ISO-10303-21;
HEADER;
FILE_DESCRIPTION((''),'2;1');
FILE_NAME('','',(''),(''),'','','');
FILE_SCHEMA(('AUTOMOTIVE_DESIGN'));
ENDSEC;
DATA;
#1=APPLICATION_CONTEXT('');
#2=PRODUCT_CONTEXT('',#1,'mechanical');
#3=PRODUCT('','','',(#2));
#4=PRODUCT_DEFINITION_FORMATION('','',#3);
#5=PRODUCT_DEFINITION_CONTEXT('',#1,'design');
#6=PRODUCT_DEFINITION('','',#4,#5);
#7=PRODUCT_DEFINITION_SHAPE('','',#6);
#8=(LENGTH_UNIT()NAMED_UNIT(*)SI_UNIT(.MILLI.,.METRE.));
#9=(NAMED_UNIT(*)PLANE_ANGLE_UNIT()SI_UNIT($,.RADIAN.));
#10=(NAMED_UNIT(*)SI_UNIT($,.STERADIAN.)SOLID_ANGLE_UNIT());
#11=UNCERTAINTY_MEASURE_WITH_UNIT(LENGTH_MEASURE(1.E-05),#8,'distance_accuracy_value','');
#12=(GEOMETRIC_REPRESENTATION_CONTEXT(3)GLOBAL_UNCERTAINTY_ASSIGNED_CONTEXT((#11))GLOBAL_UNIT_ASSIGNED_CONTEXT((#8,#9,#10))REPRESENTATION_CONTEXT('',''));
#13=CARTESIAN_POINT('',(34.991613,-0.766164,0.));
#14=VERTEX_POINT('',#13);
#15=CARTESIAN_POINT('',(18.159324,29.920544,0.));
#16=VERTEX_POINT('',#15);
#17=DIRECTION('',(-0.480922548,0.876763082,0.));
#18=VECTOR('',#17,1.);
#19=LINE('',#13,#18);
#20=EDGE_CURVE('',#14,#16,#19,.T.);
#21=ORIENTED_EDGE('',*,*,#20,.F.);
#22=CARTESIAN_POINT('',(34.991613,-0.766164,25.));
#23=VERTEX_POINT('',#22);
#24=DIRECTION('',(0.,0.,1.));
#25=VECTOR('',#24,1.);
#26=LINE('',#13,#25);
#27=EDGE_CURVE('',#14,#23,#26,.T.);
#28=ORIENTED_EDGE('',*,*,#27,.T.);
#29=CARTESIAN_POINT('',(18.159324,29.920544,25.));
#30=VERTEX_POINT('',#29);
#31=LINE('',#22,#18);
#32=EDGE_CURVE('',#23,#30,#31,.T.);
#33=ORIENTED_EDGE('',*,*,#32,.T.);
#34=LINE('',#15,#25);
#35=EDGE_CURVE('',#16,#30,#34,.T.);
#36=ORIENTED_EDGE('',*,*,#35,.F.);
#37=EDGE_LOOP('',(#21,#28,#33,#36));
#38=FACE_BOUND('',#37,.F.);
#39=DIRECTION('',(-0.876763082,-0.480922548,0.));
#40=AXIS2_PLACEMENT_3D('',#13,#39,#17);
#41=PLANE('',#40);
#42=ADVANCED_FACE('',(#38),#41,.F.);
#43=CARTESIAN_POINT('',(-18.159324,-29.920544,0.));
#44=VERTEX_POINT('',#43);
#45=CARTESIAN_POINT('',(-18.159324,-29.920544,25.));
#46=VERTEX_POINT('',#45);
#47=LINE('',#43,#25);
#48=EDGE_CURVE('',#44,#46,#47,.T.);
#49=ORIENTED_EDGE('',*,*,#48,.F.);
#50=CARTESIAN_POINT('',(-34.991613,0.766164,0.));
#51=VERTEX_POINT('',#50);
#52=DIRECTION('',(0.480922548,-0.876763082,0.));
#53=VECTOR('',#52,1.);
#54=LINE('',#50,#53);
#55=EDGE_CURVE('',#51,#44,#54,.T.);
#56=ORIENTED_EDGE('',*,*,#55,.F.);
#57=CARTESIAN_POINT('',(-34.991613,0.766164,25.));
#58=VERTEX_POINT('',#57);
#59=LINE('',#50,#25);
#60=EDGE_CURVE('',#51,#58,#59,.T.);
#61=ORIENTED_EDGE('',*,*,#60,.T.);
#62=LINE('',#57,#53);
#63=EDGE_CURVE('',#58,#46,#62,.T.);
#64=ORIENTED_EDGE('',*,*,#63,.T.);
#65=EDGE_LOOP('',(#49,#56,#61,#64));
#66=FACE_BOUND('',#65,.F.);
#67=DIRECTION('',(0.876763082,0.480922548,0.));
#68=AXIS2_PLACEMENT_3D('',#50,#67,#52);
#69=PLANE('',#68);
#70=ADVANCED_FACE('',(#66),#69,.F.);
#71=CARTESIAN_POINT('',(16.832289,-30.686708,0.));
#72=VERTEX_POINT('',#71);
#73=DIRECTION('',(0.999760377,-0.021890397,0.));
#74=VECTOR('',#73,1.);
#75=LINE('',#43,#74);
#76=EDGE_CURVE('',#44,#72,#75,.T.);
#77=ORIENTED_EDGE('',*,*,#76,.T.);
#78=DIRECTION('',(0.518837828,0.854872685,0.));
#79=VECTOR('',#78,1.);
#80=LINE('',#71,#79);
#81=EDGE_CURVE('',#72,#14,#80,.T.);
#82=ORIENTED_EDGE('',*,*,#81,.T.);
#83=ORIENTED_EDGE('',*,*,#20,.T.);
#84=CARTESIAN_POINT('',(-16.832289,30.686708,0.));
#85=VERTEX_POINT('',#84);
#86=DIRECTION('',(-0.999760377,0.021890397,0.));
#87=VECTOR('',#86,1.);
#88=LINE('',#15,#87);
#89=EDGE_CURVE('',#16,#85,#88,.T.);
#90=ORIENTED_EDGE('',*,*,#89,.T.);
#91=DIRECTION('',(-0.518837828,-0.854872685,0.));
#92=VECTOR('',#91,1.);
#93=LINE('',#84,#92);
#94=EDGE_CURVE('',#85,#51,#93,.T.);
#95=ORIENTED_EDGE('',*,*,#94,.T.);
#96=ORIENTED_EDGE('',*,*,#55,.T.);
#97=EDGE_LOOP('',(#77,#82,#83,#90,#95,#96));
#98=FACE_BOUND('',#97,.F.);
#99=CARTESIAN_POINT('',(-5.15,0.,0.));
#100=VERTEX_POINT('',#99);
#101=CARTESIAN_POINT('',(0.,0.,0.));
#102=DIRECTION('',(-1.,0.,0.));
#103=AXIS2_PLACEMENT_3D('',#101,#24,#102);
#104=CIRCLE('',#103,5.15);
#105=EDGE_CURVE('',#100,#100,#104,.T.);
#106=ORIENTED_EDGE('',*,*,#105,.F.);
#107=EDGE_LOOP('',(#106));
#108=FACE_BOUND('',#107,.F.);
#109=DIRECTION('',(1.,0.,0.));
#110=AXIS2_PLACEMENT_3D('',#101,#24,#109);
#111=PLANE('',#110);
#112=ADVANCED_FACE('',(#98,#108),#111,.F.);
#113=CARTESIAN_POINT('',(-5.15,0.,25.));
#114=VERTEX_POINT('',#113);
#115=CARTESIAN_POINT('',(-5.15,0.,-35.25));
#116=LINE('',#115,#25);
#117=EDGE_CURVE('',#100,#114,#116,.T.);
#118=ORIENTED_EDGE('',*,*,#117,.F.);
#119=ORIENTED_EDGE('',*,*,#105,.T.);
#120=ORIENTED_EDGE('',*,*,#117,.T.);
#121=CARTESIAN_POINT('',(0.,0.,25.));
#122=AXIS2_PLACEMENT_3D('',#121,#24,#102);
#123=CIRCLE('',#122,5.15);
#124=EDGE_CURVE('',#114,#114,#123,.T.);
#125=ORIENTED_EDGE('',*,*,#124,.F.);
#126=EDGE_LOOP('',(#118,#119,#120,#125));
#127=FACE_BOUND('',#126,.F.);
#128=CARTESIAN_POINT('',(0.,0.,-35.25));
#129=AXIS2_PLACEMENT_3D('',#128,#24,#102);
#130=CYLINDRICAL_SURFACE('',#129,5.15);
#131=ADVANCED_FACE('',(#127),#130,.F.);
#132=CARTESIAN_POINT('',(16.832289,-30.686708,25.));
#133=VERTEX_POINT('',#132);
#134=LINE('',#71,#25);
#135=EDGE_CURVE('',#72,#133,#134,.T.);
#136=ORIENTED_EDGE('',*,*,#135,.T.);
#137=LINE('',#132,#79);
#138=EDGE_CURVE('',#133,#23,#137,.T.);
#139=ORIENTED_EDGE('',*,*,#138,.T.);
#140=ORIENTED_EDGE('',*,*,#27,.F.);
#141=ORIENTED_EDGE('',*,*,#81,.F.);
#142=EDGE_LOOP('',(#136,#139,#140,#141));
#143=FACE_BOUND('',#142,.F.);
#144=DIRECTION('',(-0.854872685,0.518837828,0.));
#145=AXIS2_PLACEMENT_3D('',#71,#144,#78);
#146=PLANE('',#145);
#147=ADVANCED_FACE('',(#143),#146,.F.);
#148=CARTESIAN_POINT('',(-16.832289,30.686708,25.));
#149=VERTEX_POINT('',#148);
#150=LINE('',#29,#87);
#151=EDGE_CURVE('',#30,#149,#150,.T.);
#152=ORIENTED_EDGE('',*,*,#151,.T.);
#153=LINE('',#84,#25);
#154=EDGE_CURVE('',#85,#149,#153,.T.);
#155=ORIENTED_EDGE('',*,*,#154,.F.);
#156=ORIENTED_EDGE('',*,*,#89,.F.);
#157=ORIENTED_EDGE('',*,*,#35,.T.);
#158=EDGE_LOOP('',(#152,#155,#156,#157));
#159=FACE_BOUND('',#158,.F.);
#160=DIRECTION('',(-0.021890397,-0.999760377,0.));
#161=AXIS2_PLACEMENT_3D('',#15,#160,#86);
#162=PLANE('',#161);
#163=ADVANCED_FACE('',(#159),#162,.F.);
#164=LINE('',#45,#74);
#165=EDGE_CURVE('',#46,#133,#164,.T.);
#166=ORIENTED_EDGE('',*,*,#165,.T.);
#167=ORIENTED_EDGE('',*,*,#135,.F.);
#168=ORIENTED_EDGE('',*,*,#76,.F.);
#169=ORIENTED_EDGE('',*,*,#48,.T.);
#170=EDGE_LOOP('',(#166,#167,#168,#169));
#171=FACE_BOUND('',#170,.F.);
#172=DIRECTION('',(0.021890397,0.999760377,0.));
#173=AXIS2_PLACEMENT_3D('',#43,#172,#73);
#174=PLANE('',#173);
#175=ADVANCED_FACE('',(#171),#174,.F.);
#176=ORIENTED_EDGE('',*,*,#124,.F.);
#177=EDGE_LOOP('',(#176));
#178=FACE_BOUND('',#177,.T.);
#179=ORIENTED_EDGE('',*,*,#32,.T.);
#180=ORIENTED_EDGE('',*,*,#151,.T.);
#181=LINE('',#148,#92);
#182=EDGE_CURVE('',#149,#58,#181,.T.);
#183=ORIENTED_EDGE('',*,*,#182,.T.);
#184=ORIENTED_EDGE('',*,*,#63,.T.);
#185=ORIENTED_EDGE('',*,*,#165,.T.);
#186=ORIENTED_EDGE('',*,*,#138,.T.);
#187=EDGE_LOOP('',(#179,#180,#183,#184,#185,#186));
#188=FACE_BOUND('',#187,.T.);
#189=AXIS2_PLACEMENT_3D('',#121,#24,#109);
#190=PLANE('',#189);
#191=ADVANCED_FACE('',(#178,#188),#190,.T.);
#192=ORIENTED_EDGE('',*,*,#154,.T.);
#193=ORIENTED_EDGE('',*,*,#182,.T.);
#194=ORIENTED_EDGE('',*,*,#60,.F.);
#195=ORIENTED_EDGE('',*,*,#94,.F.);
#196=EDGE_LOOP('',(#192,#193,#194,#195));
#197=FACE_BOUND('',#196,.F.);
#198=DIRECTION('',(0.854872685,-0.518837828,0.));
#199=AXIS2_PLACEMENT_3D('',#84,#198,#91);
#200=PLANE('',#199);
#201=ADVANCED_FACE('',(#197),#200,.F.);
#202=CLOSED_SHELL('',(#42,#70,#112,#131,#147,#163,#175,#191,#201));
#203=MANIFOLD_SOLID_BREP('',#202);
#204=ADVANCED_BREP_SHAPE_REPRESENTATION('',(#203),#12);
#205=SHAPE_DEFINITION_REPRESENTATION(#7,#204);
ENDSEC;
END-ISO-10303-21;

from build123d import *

# Parameters (mm, degrees)
F1_DEPTH = 25
F3_D     = 10.3
F3_DEPTH = 35.25
F3_TIP   = 3.094432188


with BuildPart() as f1:
    # F0 (on Top) → F1 (new body)
    with BuildSketch(Plane.XY):
        Polygon((-16.8322891958, 30.6867078786), (-34.9916131793, 0.7661638919), (-18.1593239835, -29.9205439867), (16.8322891958, -30.6867078786), (34.9916131793, -0.7661638919), (18.1593239835, 29.9205439867), align=None)
    extrude(amount=F1_DEPTH)

    # F3
    with Locations(Plane(origin=(0, 0, 0), x_dir=(1, 0, 0), z_dir=(0, 0, -1))):
        with Locations((0, 0)):
            Hole(F3_D / 2, depth=F3_DEPTH)
            with Locations((0, 0, -(F3_DEPTH + F3_TIP / 2))):  # 118° drill point
                Cone(0, F3_D / 2, F3_TIP, mode=Mode.SUBTRACT)


solid = f1.part
